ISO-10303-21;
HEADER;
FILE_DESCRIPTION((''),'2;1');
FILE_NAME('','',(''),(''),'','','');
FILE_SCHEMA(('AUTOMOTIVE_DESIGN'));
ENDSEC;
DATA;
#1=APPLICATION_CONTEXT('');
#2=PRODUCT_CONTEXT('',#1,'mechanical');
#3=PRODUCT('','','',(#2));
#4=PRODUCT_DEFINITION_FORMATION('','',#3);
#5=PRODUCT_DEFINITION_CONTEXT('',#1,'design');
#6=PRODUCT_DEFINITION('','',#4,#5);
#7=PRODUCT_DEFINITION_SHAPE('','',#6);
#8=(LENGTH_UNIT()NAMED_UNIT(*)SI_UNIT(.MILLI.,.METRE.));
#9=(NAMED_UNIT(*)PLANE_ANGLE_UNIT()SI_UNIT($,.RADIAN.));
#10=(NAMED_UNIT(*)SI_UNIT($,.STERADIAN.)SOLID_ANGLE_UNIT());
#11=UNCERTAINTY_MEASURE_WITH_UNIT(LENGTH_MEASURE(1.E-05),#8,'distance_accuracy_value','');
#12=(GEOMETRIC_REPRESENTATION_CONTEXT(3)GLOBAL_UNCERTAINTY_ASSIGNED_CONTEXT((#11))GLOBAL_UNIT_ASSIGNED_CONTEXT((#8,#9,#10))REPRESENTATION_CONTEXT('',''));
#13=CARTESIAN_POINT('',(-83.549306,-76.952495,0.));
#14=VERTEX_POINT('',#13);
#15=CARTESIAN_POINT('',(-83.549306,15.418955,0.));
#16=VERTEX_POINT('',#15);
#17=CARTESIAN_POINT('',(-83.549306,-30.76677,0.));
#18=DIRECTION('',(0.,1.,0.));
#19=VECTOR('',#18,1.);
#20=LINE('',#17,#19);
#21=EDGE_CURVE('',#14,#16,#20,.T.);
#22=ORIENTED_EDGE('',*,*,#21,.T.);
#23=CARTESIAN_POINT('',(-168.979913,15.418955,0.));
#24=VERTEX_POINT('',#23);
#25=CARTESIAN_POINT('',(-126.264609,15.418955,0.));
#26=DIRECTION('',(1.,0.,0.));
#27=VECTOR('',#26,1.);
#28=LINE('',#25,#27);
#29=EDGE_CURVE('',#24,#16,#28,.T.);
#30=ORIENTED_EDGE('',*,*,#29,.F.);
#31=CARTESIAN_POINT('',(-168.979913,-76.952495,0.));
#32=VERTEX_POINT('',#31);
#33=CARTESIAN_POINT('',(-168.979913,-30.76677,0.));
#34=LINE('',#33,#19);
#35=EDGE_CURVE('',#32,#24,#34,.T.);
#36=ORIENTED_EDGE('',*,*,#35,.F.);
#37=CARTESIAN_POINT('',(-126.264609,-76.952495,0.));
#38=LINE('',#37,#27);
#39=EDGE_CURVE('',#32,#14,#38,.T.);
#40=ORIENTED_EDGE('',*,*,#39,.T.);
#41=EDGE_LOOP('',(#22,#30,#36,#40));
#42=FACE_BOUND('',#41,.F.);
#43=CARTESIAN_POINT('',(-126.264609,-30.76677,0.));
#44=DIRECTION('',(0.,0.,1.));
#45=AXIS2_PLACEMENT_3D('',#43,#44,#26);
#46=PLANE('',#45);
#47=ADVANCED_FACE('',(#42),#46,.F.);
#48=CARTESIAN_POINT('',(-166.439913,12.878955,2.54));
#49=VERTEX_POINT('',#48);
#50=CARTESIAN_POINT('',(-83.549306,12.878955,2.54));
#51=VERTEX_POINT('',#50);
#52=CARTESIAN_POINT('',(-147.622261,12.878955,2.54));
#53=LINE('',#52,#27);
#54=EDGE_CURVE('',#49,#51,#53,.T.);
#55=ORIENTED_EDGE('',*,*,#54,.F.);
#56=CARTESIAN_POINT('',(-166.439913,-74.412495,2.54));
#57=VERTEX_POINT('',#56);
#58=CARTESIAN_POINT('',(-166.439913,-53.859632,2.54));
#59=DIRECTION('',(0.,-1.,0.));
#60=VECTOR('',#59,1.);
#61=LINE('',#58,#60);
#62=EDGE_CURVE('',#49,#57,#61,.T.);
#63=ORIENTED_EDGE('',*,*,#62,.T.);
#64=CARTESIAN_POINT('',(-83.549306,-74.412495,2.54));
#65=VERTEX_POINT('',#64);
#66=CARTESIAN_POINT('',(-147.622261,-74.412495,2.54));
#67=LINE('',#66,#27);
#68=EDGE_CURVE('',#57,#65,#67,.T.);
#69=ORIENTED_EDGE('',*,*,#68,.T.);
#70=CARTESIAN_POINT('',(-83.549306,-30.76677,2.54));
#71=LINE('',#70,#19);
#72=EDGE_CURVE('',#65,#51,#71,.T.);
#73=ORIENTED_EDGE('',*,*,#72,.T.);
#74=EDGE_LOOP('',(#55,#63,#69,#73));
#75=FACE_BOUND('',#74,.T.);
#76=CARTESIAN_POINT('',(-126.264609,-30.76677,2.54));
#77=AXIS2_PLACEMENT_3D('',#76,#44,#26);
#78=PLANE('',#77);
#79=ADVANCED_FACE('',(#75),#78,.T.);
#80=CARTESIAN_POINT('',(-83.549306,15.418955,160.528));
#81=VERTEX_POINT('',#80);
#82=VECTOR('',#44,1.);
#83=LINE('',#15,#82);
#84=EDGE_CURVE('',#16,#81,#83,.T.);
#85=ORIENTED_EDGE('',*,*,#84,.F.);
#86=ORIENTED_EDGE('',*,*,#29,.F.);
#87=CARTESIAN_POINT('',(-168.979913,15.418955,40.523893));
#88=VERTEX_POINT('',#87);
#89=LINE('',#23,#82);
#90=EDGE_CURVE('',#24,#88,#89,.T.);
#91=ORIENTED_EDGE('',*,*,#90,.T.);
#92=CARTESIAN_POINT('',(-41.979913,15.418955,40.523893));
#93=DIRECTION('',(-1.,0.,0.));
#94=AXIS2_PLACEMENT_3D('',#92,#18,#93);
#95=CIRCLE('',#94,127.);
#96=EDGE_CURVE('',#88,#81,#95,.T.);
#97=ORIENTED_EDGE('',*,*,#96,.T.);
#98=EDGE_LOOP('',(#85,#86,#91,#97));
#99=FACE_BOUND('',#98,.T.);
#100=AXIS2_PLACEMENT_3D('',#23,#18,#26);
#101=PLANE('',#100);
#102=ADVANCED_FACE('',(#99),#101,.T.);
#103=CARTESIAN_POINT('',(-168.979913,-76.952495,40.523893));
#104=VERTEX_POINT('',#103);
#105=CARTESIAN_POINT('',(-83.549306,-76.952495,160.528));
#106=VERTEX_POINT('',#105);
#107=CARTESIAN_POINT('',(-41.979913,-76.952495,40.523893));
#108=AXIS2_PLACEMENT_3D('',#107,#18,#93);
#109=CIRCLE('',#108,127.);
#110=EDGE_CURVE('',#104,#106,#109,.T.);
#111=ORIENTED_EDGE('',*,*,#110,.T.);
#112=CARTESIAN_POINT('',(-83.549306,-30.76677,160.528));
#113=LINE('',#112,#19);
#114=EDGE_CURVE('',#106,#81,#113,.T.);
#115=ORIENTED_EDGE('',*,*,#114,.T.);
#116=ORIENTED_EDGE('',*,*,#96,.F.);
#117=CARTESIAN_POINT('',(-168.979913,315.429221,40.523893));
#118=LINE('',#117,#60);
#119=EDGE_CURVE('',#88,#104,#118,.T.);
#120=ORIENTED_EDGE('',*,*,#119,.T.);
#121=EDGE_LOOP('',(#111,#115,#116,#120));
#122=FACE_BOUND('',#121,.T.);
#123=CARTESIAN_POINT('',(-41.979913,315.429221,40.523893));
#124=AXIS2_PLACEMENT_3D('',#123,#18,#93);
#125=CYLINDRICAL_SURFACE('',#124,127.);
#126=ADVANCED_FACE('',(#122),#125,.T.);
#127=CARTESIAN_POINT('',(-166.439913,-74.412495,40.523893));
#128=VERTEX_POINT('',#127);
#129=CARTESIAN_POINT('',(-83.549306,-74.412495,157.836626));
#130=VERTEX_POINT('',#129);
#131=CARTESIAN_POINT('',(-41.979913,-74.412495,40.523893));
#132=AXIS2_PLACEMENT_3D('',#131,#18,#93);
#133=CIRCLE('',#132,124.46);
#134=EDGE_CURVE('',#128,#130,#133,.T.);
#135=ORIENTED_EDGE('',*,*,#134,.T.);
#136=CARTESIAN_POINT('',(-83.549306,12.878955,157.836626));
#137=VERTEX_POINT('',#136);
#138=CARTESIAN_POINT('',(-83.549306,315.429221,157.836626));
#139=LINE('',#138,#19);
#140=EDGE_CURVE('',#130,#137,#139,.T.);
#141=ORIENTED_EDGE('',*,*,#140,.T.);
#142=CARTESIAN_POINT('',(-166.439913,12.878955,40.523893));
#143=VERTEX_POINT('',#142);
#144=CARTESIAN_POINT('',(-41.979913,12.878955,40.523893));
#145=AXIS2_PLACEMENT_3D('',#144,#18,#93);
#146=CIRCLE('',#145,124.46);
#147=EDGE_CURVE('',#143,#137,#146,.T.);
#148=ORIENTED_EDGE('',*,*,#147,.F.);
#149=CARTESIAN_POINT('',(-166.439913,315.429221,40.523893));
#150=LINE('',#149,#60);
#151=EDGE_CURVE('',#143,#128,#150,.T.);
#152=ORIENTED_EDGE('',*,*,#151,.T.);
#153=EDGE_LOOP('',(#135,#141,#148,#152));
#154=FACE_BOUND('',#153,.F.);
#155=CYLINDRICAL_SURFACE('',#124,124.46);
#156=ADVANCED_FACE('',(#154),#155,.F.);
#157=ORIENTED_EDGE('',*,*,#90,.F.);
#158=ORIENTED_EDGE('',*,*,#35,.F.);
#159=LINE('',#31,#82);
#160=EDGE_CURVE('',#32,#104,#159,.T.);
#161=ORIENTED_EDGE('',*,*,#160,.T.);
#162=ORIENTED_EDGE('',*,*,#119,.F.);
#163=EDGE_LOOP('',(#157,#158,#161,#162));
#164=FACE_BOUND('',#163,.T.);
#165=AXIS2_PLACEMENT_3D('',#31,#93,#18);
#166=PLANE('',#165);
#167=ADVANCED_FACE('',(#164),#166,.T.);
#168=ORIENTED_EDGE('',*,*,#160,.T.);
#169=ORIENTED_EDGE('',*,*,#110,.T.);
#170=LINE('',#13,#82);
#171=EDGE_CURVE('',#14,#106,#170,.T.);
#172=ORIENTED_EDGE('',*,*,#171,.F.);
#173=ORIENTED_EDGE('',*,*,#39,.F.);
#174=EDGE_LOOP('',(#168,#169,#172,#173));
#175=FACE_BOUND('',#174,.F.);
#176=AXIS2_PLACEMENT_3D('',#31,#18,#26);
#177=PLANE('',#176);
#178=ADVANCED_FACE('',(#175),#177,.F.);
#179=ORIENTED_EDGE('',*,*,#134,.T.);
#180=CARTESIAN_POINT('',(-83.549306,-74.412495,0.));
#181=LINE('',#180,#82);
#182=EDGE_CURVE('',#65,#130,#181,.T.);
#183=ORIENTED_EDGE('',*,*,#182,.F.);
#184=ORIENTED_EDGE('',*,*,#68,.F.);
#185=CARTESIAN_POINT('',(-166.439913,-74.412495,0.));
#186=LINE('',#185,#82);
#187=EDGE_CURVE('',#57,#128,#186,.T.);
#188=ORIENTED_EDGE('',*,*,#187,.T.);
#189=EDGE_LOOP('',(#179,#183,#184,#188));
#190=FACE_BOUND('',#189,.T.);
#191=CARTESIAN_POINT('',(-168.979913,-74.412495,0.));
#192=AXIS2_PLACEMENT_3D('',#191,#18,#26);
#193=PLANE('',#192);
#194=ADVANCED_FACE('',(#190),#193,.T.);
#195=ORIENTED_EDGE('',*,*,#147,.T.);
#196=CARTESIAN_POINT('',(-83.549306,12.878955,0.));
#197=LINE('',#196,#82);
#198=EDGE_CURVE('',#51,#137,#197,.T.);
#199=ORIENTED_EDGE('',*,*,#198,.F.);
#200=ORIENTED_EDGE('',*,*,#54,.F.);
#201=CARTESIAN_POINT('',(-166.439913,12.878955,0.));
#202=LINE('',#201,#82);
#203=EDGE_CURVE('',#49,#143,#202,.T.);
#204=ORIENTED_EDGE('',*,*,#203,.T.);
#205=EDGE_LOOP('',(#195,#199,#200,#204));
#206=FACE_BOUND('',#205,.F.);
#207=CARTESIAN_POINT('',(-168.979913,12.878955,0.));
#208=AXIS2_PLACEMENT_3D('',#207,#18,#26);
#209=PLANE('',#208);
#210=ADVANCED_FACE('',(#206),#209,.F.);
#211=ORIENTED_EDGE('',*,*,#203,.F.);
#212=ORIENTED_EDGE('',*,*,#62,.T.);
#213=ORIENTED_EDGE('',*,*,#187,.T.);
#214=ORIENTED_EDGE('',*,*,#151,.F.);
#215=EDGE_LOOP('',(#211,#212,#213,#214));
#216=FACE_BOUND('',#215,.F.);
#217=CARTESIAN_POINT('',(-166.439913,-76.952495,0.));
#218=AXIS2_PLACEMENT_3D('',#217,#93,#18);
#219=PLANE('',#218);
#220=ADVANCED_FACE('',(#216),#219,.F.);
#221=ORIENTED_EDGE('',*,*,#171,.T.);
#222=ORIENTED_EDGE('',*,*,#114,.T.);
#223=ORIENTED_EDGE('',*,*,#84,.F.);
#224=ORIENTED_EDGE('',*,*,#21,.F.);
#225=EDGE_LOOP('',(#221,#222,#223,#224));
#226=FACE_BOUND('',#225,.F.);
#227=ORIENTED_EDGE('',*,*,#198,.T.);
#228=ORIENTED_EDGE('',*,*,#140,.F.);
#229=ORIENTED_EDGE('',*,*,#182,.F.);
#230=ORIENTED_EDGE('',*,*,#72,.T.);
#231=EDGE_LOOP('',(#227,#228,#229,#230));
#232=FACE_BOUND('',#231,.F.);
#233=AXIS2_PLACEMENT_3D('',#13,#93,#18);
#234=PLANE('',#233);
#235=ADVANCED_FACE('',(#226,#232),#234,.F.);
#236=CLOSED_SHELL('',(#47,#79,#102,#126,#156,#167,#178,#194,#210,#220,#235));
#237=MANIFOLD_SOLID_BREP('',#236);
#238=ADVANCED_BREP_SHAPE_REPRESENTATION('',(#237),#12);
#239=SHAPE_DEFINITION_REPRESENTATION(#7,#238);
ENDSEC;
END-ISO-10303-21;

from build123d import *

# Parameters (mm, degrees)
F0_W        = 85.4306071997
F0_H        = 92.3714498058
F1_DEPTH    = 160.528
F2_T1_DEPTH = 692.3919824172
F3_T        = -2.54


# Not quite as in the source:
# - a fillet or chamfer that OpenCascade refuses, or shapes differently, is made with other operations: its cross-section is extruded or revolved along the edge and cut away or added


with BuildPart() as f1:
    # F0 (on Top) → F1 (new body)
    with BuildSketch(Plane.XY):
        with Locations((-126.2646093965, -30.766769778)):
            Rectangle(F0_W, F0_H)
    extrude(amount=F1_DEPTH)

    # F2: fillet of radius 127 on 1 edges, made by hand

    # F2_s2 → F2_t1 (cut)
    with BuildSketch(Plane.XZ.offset(-315.4292214306)):
        with BuildLine():
            ThreePointArc((-168.9799129963, 40.5238934777), (-145.4408062982, 114.1774307803), (-83.5493057966, 160.528))
            Line((-83.5493057966, 160.528), (-168.9799129963, 160.528))
            Line((-168.9799129963, 160.528), (-168.9799129963, 40.5238934777))
        make_face()
    extrude(amount=F2_T1_DEPTH, mode=Mode.SUBTRACT)

    # F3
    f3_openings = [f1.faces().sort_by_distance(p)[0] for p in [
        (-83.549306, -30.76677, 80.264),
    ]]
    offset(amount=F3_T, openings=f3_openings)


solid = f1.part
